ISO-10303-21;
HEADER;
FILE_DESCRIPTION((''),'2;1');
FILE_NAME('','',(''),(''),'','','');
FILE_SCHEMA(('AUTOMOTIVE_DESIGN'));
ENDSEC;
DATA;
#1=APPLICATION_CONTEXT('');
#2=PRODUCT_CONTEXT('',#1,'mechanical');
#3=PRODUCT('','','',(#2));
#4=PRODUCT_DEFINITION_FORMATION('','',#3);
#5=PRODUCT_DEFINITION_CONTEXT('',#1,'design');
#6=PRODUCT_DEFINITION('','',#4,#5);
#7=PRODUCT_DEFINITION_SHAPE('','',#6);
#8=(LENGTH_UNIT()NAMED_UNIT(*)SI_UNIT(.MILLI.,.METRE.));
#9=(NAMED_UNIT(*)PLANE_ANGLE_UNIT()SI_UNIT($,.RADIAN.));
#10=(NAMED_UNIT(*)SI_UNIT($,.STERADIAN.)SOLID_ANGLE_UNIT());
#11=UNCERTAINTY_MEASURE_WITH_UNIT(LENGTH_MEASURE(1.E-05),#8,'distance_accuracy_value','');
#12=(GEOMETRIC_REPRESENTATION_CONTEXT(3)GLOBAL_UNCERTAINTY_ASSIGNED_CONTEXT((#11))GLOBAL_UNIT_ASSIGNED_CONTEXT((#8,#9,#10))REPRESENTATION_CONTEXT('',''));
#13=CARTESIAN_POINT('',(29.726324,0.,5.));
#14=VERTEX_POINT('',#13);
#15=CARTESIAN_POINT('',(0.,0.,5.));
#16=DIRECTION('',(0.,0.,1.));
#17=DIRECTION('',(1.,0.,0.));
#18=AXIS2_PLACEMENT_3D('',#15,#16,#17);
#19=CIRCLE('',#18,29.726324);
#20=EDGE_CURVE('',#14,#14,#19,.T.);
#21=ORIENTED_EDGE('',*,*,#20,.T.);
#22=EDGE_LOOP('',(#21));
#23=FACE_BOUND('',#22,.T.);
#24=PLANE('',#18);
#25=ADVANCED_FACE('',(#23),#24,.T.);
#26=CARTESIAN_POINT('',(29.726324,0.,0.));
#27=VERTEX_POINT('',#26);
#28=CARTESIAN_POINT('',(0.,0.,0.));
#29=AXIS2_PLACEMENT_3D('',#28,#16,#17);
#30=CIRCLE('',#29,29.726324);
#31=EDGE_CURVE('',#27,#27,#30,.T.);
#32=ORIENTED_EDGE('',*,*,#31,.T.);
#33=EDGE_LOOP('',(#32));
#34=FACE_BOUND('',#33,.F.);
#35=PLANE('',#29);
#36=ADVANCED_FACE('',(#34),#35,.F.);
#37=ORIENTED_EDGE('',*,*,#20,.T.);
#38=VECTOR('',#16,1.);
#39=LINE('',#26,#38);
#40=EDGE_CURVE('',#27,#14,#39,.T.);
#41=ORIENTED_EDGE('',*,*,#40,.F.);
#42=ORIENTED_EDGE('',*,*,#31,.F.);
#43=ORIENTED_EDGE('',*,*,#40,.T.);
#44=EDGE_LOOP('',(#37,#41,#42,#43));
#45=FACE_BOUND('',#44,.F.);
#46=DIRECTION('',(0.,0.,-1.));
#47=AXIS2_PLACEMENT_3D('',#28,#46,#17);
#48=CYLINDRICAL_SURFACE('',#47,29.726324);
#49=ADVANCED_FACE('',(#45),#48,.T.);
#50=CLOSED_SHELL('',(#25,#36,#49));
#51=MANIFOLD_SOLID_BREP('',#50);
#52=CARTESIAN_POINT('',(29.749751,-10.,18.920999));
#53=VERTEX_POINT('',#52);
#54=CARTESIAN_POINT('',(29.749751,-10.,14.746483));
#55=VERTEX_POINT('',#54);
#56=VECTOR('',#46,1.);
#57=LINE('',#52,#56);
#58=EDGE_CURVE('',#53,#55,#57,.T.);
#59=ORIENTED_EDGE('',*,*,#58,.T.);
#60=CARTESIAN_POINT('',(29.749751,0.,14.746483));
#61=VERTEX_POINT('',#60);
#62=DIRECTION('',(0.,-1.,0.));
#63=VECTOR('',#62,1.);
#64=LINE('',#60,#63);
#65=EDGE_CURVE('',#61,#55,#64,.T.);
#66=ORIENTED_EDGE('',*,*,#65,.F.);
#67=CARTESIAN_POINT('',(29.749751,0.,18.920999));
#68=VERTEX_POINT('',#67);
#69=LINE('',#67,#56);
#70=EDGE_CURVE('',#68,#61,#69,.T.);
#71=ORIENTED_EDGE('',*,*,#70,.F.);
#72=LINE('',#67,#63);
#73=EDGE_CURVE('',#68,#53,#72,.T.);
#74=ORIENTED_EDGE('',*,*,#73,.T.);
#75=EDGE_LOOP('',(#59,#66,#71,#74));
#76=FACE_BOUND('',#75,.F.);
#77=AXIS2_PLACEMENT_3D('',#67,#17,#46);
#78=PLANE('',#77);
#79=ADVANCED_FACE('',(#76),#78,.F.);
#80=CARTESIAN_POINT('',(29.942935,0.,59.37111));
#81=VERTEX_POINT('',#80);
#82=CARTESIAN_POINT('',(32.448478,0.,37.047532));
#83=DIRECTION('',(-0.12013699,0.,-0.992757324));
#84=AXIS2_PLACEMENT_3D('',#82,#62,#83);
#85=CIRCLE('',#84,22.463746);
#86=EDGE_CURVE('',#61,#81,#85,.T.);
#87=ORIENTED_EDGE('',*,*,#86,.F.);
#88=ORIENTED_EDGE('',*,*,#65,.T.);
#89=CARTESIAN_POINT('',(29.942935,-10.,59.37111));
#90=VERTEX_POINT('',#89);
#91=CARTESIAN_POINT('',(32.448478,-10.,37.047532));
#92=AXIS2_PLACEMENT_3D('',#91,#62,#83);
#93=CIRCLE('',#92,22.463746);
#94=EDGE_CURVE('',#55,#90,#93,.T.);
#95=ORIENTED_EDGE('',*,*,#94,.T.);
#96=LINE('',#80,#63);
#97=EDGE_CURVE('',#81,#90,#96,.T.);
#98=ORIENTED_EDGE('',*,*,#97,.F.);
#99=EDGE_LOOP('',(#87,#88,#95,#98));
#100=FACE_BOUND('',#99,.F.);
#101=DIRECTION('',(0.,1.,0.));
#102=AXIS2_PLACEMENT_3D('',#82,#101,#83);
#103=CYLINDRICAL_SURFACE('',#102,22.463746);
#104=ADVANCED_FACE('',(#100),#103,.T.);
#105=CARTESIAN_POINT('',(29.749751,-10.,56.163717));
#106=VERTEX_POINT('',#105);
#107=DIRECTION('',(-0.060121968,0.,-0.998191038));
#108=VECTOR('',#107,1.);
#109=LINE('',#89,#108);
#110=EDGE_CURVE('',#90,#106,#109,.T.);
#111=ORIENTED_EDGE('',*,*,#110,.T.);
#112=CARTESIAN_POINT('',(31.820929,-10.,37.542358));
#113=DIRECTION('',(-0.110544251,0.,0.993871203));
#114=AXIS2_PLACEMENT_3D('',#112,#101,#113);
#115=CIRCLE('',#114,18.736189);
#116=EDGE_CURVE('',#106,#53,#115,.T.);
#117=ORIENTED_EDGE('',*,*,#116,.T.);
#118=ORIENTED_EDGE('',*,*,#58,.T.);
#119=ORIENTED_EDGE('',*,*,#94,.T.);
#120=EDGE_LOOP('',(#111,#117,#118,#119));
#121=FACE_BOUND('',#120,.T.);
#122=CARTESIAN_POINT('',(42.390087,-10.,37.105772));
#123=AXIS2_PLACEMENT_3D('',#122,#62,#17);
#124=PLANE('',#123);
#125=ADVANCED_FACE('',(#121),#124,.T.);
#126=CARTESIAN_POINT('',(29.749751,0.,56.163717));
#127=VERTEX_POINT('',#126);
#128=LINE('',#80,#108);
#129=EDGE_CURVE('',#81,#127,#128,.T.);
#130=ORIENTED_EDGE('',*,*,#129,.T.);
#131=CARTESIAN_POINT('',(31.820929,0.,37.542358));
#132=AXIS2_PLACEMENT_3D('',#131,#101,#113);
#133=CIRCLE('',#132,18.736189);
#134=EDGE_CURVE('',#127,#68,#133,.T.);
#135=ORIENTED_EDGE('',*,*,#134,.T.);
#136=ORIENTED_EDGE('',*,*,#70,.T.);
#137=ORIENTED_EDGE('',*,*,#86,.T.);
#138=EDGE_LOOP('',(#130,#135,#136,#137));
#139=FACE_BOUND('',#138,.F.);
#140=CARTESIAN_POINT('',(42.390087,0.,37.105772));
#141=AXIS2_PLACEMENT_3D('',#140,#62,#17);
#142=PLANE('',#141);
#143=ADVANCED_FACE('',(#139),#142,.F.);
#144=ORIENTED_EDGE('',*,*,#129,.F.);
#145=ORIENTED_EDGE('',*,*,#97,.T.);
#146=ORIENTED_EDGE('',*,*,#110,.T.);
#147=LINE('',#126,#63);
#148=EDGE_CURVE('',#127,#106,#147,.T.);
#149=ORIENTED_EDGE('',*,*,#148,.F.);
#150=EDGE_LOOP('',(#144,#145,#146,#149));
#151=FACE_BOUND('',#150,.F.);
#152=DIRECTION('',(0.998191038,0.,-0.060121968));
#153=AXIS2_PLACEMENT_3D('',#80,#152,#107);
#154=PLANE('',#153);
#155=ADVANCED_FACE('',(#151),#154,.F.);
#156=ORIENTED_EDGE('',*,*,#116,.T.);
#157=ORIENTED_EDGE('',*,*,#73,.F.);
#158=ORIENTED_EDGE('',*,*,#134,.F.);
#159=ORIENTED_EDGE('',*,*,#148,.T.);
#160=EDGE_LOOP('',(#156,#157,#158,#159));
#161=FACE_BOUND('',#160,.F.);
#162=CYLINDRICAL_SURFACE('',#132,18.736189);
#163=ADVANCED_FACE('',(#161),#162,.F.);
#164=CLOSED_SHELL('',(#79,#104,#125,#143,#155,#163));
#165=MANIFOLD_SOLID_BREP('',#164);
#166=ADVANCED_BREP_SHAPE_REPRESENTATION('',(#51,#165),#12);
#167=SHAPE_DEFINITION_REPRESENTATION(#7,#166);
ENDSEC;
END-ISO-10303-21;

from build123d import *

# Parameters (mm, degrees)
F3_DEPTH = 10
F4_R     = 29.7263240479
F5_DEPTH = 5


# Not quite as in the source:
# - the program builds the solid bodies; features that only make, move or delete a surface that nothing else refers to are left out


with BuildPart() as f3:
    # F2 (on Front) → F3 (new body)
    with BuildSketch(Plane.XZ):
        with BuildLine():
            Line((29.749751091, 18.9209990203), (29.749751091, 14.7464834154))
            ThreePointArc((29.749751091, 14.7464834154), (54.9120135043, 36.9502850693), (29.9429353327, 59.3711100519))
            Line((29.9429353327, 59.3711100519), (29.749751091, 56.1637170613))
            ThreePointArc((29.749751091, 56.1637170613), (50.5571184209, 37.5423580408), (29.749751091, 18.9209990203))
        make_face()
    extrude(amount=F3_DEPTH)


with BuildPart() as f5:
    # F4 (on Top) → F5 (new body)
    with BuildSketch(Plane.XY):
        Circle(F4_R)
    extrude(amount=F5_DEPTH)


solid = Compound([f3.part, f5.part])
